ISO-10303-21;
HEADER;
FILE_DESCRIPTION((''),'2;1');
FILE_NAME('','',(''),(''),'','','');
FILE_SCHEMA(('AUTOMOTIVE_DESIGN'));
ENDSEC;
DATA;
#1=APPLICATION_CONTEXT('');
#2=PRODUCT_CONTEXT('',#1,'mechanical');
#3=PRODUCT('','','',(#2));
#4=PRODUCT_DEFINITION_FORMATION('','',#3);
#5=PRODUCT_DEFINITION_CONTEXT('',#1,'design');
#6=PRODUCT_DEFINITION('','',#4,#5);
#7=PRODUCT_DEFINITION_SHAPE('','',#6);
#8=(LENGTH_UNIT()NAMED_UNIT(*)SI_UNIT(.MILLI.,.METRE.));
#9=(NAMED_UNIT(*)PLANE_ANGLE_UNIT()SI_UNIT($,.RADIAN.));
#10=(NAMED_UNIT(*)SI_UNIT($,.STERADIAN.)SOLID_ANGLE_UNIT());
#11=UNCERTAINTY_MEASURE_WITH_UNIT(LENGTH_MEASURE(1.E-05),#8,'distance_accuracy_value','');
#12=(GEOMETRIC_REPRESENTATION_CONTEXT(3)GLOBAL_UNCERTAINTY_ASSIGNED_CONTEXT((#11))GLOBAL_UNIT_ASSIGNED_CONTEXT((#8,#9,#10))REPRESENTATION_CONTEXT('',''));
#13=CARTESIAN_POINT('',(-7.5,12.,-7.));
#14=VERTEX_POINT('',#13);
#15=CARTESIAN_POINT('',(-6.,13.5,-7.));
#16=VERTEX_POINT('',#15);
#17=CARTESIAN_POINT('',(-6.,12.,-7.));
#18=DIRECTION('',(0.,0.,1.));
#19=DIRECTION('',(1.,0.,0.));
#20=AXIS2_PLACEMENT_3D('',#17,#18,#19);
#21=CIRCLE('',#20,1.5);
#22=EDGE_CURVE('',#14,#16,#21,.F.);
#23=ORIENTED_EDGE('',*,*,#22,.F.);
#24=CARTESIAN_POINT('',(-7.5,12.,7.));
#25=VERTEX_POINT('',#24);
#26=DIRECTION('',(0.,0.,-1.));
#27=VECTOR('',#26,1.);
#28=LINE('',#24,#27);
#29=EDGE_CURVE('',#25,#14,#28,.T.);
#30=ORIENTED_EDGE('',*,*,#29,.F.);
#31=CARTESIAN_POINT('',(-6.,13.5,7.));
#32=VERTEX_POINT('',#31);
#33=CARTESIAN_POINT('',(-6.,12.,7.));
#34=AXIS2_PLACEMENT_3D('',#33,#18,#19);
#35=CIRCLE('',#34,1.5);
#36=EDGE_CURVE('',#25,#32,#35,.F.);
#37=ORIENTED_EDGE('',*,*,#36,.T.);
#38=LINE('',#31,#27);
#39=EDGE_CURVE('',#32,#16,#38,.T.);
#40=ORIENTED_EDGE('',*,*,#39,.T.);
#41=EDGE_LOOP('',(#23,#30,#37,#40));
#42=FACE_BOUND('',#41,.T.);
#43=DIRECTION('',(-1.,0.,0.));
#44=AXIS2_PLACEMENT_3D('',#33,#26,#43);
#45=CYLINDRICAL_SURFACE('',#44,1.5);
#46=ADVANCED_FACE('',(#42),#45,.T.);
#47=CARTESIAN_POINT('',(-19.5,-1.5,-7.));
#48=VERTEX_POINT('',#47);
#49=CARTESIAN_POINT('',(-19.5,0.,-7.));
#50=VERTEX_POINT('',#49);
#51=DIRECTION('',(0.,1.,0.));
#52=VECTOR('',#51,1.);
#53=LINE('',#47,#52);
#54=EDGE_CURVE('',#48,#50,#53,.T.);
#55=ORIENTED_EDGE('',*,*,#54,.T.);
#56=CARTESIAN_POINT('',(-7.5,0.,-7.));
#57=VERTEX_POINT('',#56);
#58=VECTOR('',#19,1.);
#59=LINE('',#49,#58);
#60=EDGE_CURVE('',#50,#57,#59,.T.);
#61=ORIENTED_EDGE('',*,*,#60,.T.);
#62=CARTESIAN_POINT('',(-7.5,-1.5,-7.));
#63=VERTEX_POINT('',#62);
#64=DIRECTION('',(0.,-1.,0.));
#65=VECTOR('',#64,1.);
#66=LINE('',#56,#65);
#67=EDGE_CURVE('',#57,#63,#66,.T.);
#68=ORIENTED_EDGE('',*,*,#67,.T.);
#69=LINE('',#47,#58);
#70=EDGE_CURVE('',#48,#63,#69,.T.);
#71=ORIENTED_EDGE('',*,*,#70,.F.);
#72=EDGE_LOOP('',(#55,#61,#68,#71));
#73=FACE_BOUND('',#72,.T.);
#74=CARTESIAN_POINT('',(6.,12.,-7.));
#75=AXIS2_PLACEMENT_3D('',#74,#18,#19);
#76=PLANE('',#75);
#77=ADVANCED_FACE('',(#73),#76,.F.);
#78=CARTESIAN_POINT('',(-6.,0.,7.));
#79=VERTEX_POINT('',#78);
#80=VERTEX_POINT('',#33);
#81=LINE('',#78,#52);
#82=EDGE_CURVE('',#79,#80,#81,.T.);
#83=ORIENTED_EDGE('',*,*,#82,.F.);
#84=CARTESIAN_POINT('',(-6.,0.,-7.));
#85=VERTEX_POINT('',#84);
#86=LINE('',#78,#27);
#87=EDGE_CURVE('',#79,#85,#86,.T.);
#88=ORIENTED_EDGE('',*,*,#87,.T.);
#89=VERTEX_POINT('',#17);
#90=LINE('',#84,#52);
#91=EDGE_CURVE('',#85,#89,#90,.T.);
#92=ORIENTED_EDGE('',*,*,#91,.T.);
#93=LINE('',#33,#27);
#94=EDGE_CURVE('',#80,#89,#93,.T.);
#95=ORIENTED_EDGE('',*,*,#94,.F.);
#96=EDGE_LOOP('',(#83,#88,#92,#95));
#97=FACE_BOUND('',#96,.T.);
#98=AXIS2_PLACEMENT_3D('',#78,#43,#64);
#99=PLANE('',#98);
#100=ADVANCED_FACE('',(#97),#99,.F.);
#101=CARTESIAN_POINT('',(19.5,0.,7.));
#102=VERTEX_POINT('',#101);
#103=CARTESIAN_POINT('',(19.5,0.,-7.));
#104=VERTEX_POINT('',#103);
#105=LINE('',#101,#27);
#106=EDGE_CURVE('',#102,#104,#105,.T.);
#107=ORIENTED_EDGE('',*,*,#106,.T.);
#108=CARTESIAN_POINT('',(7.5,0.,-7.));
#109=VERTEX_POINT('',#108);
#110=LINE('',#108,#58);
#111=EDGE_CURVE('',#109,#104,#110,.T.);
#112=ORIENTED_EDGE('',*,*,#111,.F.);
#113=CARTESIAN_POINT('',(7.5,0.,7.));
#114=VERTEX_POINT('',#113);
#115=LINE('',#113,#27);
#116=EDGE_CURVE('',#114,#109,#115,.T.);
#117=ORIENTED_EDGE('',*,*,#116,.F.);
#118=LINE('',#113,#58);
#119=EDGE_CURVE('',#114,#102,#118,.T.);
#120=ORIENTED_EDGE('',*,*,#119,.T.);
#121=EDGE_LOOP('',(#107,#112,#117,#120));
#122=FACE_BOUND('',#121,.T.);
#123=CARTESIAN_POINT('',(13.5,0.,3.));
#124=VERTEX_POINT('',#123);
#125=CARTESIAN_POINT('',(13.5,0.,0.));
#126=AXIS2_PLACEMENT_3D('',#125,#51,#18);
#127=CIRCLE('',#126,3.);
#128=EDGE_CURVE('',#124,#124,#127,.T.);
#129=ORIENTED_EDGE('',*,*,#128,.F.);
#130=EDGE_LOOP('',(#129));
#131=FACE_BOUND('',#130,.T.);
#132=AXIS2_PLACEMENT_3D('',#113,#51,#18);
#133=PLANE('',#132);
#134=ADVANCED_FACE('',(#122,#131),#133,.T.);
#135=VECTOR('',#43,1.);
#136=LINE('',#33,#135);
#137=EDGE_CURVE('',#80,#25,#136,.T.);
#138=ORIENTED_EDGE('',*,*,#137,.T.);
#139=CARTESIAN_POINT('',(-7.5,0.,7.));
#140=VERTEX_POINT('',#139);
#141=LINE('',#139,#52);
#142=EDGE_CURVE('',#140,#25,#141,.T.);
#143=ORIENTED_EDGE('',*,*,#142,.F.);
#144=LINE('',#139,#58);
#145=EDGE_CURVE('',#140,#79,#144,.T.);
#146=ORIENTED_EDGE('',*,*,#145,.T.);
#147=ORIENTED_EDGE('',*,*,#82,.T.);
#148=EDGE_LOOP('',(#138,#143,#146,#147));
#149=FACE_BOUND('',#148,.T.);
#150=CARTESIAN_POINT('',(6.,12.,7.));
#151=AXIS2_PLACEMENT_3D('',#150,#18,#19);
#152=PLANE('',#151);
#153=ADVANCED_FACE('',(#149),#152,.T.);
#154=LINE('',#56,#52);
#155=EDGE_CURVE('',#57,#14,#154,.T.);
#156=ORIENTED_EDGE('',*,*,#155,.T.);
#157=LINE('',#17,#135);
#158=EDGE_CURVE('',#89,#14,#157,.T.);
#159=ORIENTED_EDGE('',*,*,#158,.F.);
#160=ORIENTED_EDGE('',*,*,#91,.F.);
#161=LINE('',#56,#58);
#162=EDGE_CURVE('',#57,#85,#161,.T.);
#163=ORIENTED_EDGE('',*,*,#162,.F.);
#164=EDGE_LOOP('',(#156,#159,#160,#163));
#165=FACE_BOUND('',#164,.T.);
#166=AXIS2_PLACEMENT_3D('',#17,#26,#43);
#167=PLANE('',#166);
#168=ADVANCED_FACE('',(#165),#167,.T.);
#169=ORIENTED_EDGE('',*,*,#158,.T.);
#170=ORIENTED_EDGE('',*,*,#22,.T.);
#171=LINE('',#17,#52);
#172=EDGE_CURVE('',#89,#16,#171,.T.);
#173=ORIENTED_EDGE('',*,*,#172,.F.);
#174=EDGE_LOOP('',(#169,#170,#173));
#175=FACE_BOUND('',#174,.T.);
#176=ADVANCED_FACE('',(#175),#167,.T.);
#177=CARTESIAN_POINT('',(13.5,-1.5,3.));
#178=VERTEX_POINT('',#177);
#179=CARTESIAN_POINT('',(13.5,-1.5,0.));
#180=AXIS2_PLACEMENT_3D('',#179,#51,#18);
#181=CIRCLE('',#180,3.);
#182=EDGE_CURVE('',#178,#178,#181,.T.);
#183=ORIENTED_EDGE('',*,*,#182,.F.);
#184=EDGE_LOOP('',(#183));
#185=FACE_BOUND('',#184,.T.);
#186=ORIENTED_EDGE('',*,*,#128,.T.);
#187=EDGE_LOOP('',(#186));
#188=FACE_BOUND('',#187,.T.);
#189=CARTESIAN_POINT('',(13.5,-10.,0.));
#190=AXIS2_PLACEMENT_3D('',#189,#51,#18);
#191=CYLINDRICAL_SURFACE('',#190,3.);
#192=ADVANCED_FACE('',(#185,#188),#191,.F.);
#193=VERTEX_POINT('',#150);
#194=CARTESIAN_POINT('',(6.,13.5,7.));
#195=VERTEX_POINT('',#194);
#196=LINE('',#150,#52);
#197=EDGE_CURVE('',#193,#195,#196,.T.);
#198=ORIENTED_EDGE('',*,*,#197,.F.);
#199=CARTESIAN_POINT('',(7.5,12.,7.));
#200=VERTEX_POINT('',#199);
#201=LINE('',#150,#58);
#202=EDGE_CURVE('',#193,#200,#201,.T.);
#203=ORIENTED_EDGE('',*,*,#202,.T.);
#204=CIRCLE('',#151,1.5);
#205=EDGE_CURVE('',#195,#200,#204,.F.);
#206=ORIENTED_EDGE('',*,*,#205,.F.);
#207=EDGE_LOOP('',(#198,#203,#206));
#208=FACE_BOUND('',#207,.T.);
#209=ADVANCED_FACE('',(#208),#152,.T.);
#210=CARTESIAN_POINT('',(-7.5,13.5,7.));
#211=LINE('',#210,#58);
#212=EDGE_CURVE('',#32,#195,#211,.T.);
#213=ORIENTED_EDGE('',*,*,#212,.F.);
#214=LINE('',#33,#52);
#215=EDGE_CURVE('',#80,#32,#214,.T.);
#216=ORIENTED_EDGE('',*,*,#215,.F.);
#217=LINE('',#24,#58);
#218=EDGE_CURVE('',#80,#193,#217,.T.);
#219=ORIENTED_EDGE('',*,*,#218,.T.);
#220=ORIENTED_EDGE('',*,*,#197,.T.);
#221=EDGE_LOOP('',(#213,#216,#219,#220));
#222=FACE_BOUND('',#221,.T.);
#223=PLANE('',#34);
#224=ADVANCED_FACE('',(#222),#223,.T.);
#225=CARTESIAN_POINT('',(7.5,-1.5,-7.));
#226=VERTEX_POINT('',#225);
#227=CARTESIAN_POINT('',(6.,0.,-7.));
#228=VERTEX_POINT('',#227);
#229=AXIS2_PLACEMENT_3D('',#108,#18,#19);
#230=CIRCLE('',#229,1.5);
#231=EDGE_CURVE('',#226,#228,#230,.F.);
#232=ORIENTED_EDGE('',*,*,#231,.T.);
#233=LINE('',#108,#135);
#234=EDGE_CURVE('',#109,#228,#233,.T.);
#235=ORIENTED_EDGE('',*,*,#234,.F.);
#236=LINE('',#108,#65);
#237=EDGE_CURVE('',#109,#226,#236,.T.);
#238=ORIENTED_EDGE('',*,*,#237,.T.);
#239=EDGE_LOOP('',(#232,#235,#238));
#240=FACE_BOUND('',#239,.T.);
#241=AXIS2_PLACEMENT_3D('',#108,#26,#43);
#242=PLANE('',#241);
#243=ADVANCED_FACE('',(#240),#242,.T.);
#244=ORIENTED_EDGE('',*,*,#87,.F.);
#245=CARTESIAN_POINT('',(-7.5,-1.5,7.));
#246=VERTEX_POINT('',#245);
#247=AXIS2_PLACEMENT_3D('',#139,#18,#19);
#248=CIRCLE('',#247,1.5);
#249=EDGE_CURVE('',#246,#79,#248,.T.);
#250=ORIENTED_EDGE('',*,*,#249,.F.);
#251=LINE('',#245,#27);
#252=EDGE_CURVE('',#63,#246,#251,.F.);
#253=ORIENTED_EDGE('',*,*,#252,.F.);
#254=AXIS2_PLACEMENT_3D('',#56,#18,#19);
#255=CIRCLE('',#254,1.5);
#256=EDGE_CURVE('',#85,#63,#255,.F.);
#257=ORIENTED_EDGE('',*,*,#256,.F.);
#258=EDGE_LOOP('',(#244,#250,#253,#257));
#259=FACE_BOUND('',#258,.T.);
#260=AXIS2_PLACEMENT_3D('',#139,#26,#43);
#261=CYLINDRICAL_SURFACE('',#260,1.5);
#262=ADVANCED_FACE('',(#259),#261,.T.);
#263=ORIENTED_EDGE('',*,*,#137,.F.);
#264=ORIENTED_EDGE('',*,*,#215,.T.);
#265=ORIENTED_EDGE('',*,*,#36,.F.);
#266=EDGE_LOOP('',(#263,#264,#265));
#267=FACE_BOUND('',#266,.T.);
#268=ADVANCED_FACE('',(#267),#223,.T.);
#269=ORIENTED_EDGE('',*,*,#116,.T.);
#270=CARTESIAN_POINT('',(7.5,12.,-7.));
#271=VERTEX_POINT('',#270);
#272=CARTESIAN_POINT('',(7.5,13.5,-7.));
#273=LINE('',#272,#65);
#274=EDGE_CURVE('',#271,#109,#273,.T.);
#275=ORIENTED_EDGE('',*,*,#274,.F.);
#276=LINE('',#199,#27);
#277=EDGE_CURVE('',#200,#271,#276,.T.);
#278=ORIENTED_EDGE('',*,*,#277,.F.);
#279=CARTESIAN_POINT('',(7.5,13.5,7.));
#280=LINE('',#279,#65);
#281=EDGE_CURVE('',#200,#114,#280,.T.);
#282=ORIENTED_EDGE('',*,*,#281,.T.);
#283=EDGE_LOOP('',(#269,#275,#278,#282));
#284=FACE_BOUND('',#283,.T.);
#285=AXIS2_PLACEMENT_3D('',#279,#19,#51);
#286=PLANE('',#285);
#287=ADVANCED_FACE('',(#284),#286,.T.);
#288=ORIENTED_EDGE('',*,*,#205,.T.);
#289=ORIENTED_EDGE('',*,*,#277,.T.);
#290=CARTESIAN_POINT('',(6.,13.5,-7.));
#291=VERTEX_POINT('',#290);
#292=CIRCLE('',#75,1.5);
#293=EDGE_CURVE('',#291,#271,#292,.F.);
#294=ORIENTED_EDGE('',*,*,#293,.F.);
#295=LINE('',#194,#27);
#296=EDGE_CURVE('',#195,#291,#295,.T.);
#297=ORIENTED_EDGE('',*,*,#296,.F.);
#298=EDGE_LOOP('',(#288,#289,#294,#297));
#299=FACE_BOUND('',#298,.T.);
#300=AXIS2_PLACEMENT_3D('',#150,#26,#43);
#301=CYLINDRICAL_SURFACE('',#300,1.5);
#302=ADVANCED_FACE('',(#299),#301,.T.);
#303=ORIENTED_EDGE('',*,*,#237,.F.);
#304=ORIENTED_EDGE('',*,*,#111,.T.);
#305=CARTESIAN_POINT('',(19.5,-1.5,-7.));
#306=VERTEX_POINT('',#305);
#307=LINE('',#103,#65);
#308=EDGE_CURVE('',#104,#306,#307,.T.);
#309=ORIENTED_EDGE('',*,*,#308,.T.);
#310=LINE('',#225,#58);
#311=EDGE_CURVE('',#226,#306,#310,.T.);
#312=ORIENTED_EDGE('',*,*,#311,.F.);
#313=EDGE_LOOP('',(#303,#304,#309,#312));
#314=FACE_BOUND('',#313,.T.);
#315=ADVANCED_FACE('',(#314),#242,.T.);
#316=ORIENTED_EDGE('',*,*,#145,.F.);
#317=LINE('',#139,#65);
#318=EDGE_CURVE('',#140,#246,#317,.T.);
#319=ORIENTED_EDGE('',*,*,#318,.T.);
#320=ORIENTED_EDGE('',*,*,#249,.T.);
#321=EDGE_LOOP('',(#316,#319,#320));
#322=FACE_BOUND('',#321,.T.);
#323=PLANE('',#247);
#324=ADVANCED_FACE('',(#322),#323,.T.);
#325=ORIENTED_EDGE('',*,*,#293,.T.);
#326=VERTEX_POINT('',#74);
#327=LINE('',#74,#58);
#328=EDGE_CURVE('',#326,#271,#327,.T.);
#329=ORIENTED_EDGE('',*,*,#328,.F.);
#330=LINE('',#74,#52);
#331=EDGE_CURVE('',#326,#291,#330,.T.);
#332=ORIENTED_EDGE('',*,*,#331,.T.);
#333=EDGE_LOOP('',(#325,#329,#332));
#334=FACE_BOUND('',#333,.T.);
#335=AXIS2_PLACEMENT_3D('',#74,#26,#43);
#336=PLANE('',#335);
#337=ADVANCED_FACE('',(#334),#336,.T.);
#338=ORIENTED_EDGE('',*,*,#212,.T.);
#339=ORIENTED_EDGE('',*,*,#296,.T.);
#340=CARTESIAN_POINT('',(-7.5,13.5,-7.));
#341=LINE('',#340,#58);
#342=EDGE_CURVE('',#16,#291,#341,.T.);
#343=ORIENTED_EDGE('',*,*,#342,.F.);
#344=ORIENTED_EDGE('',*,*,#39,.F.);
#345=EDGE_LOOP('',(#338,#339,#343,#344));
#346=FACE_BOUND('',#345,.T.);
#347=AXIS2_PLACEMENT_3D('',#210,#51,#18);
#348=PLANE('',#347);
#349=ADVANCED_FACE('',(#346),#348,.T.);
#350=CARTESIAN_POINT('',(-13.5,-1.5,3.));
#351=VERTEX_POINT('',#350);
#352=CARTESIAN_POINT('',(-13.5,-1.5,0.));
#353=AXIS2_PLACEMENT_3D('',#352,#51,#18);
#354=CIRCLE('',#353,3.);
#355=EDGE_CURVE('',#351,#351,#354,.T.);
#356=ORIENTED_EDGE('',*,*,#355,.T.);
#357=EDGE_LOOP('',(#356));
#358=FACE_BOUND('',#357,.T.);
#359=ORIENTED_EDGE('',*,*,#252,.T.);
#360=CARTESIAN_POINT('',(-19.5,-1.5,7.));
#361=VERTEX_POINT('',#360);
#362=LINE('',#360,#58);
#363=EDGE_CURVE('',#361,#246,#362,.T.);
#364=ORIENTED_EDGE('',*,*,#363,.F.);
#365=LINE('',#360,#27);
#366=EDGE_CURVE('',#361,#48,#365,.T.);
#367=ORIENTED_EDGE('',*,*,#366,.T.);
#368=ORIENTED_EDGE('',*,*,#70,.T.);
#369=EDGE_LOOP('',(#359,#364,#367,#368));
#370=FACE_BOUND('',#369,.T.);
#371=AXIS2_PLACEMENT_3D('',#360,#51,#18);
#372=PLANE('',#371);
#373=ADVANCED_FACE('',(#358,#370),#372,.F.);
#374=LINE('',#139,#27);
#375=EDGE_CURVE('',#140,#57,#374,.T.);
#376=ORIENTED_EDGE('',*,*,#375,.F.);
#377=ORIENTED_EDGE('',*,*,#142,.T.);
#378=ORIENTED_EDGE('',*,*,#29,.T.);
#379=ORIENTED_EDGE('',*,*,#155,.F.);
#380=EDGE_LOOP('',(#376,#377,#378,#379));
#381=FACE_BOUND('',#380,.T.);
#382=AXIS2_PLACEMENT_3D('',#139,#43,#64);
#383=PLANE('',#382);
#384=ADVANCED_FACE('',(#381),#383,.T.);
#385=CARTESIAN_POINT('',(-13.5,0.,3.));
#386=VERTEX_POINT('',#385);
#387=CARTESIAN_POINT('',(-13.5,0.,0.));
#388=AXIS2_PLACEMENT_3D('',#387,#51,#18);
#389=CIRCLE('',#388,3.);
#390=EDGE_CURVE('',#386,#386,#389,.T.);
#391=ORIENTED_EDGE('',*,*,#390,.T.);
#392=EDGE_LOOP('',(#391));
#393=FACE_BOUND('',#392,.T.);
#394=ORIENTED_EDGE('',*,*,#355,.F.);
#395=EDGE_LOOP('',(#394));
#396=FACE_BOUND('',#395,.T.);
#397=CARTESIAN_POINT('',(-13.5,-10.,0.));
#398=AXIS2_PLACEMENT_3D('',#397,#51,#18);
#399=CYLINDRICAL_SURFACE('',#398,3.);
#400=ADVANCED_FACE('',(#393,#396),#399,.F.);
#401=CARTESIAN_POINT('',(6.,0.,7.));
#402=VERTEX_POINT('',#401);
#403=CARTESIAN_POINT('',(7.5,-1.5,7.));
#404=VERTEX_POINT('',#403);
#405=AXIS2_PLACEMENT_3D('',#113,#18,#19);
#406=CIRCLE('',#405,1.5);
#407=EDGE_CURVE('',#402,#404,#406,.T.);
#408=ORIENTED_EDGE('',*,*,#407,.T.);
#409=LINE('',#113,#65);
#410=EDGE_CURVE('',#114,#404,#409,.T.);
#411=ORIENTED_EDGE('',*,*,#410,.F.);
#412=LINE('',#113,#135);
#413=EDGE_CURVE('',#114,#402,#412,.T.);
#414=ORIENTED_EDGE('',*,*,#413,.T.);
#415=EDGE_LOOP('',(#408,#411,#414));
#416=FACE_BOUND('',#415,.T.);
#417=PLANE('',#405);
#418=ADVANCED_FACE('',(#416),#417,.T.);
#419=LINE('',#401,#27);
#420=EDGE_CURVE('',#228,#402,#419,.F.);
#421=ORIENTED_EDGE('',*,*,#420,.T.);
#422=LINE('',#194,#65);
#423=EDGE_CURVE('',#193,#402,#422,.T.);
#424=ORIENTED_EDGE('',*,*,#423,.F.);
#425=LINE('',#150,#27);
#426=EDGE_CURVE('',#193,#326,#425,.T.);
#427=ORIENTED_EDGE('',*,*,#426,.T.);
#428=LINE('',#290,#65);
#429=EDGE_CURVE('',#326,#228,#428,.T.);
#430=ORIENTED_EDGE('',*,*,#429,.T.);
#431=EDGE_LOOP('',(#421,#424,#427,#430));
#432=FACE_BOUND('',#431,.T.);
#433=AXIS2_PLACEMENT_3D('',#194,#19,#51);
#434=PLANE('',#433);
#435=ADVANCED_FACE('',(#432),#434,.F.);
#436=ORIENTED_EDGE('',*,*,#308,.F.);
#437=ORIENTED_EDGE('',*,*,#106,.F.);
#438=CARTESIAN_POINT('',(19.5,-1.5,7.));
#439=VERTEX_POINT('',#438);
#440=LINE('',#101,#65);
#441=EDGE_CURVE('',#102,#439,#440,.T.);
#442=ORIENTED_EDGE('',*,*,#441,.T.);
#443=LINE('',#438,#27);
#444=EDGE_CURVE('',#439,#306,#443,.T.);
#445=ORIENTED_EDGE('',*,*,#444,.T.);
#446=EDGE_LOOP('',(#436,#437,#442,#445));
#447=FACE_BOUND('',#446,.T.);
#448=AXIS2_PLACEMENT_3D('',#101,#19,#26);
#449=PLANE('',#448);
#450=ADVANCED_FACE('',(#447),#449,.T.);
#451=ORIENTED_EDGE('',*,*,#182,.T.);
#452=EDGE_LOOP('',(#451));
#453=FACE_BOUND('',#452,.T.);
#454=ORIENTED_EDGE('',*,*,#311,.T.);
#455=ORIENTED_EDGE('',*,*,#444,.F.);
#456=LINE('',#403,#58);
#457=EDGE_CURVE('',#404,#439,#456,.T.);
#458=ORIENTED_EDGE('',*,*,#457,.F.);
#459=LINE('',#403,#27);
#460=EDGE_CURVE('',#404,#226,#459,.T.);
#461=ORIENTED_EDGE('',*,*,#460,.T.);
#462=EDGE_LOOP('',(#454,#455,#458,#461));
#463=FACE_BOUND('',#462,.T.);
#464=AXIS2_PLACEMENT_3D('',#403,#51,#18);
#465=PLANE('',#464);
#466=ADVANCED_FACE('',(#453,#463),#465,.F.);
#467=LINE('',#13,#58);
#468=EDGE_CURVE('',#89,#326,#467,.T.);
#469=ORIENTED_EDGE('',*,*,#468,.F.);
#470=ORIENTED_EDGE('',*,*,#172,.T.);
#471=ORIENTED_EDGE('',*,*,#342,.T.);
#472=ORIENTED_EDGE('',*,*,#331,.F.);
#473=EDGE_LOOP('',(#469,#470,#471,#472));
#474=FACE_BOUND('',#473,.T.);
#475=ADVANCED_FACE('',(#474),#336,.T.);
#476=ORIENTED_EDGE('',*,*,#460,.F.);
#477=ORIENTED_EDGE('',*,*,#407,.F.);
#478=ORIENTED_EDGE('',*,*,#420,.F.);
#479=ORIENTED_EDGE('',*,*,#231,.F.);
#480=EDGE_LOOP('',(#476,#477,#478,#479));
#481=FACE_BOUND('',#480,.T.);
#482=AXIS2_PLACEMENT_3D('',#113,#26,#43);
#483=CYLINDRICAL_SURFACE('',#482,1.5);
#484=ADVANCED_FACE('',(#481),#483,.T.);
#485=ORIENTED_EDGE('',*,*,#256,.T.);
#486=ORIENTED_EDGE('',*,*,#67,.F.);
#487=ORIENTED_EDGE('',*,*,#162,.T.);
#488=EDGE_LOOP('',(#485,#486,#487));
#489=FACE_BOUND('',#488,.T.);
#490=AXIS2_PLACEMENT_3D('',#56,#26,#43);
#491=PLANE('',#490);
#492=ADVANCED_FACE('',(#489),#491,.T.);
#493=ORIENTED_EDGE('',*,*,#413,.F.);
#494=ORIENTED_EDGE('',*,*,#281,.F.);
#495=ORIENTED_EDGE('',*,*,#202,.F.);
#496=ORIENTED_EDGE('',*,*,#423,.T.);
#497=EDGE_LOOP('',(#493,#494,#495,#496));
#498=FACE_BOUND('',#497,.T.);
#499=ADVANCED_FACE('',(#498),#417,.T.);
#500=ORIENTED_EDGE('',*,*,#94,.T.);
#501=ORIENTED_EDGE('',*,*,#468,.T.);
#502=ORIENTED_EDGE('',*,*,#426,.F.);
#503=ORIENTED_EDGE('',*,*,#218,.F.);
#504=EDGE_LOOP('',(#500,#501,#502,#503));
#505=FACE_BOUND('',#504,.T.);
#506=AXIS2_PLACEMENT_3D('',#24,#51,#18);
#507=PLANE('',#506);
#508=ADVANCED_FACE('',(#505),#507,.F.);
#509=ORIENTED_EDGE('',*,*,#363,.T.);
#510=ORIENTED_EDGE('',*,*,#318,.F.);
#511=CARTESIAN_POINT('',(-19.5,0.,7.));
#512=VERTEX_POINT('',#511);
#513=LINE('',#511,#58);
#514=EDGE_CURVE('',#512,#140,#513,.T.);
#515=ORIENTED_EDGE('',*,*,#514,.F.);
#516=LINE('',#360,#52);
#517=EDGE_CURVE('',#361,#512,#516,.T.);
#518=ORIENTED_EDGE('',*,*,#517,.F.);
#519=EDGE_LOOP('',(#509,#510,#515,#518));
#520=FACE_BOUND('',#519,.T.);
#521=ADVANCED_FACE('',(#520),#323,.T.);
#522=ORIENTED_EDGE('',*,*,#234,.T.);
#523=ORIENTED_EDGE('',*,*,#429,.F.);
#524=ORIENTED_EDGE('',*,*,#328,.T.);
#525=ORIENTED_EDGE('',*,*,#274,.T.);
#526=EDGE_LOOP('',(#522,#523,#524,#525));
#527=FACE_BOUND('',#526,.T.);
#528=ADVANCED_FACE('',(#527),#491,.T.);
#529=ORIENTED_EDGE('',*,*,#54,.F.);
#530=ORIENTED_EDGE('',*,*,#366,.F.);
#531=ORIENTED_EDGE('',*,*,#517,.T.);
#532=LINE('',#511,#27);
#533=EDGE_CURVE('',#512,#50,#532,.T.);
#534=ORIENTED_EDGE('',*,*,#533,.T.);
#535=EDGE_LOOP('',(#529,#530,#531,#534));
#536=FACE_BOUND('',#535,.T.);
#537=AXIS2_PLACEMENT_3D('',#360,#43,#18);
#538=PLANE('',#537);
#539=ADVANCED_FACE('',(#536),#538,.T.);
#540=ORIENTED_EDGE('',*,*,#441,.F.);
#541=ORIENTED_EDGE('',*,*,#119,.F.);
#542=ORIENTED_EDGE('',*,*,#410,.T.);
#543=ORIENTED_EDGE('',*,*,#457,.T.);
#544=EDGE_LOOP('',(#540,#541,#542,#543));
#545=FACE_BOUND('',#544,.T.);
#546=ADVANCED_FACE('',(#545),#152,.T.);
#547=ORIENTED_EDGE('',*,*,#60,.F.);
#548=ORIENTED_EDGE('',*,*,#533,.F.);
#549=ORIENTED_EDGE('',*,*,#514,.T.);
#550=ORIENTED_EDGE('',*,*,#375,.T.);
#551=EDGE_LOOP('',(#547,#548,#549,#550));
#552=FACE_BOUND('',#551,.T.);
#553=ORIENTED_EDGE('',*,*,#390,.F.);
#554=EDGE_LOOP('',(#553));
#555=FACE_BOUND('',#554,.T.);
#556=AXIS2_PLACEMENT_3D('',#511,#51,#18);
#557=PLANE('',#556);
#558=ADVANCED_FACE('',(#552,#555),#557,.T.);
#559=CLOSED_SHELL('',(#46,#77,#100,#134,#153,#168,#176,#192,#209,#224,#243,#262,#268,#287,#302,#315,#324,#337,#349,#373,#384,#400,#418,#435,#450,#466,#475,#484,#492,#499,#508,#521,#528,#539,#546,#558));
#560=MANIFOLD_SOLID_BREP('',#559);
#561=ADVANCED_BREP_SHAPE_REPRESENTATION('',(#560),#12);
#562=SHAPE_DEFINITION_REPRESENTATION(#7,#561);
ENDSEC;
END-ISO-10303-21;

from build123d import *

# Parameters (mm, degrees)
SM_START               = -7
SM_BASE_FLANGE_1_DEPTH = 14
SKETCH_6_R             = 3
CUT_EXTRUDE_1_DEPTH    = 10


# Read off the part's stored shape, not the designer's step: 基体-法兰1
with BuildPart() as part:
    # 基体-法兰1 outline → 基体-法兰1 (new body)
    with BuildSketch(Plane.XY.offset(SM_START)):
        with BuildLine():
            Line((7.5, -1.5), (19.5, -1.5))
            Line((19.5, -1.5), (19.5, 0))
            Line((19.5, 0), (7.5, 0))
            Line((7.5, 0), (7.5, 12))
            ThreePointArc((7.5, 12), (7.060660172, 13.060660172), (6, 13.5))
            Line((6, 13.5), (-6, 13.5))
            ThreePointArc((-6, 13.5), (-7.060660172, 13.060660172), (-7.5, 12))
            Line((-7.5, 12), (-7.5, 0))
            Line((-7.5, 0), (-19.5, 0))
            Line((-19.5, 0), (-19.5, -1.5))
            Line((-19.5, -1.5), (-7.5, -1.5))
            ThreePointArc((-7.5, -1.5), (-6.439339828, -1.060660172), (-6, 0))
            Line((-6, 0), (-6, 12))
            Line((-6, 12), (6, 12))
            Line((6, 12), (6, 0))
            ThreePointArc((6, 0), (6.439339828, -1.060660172), (7.5, -1.5))
        make_face()
    extrude(amount=SM_BASE_FLANGE_1_DEPTH)

    # 草图6 → 切除-拉伸1 (cut)
    with BuildSketch(Plane(origin=(0, 0, 0), x_dir=(1, 0, 0), z_dir=(0, 1, 0))):
        with Locations(Location((-13.5, 0, 0), (0, 0, 270))):
            Circle(SKETCH_6_R)
        with Locations(Location((13.5, 0, 0), (0, 0, 270))):
            Circle(SKETCH_6_R)
    extrude(amount=-CUT_EXTRUDE_1_DEPTH, mode=Mode.SUBTRACT)


solid = part.part
